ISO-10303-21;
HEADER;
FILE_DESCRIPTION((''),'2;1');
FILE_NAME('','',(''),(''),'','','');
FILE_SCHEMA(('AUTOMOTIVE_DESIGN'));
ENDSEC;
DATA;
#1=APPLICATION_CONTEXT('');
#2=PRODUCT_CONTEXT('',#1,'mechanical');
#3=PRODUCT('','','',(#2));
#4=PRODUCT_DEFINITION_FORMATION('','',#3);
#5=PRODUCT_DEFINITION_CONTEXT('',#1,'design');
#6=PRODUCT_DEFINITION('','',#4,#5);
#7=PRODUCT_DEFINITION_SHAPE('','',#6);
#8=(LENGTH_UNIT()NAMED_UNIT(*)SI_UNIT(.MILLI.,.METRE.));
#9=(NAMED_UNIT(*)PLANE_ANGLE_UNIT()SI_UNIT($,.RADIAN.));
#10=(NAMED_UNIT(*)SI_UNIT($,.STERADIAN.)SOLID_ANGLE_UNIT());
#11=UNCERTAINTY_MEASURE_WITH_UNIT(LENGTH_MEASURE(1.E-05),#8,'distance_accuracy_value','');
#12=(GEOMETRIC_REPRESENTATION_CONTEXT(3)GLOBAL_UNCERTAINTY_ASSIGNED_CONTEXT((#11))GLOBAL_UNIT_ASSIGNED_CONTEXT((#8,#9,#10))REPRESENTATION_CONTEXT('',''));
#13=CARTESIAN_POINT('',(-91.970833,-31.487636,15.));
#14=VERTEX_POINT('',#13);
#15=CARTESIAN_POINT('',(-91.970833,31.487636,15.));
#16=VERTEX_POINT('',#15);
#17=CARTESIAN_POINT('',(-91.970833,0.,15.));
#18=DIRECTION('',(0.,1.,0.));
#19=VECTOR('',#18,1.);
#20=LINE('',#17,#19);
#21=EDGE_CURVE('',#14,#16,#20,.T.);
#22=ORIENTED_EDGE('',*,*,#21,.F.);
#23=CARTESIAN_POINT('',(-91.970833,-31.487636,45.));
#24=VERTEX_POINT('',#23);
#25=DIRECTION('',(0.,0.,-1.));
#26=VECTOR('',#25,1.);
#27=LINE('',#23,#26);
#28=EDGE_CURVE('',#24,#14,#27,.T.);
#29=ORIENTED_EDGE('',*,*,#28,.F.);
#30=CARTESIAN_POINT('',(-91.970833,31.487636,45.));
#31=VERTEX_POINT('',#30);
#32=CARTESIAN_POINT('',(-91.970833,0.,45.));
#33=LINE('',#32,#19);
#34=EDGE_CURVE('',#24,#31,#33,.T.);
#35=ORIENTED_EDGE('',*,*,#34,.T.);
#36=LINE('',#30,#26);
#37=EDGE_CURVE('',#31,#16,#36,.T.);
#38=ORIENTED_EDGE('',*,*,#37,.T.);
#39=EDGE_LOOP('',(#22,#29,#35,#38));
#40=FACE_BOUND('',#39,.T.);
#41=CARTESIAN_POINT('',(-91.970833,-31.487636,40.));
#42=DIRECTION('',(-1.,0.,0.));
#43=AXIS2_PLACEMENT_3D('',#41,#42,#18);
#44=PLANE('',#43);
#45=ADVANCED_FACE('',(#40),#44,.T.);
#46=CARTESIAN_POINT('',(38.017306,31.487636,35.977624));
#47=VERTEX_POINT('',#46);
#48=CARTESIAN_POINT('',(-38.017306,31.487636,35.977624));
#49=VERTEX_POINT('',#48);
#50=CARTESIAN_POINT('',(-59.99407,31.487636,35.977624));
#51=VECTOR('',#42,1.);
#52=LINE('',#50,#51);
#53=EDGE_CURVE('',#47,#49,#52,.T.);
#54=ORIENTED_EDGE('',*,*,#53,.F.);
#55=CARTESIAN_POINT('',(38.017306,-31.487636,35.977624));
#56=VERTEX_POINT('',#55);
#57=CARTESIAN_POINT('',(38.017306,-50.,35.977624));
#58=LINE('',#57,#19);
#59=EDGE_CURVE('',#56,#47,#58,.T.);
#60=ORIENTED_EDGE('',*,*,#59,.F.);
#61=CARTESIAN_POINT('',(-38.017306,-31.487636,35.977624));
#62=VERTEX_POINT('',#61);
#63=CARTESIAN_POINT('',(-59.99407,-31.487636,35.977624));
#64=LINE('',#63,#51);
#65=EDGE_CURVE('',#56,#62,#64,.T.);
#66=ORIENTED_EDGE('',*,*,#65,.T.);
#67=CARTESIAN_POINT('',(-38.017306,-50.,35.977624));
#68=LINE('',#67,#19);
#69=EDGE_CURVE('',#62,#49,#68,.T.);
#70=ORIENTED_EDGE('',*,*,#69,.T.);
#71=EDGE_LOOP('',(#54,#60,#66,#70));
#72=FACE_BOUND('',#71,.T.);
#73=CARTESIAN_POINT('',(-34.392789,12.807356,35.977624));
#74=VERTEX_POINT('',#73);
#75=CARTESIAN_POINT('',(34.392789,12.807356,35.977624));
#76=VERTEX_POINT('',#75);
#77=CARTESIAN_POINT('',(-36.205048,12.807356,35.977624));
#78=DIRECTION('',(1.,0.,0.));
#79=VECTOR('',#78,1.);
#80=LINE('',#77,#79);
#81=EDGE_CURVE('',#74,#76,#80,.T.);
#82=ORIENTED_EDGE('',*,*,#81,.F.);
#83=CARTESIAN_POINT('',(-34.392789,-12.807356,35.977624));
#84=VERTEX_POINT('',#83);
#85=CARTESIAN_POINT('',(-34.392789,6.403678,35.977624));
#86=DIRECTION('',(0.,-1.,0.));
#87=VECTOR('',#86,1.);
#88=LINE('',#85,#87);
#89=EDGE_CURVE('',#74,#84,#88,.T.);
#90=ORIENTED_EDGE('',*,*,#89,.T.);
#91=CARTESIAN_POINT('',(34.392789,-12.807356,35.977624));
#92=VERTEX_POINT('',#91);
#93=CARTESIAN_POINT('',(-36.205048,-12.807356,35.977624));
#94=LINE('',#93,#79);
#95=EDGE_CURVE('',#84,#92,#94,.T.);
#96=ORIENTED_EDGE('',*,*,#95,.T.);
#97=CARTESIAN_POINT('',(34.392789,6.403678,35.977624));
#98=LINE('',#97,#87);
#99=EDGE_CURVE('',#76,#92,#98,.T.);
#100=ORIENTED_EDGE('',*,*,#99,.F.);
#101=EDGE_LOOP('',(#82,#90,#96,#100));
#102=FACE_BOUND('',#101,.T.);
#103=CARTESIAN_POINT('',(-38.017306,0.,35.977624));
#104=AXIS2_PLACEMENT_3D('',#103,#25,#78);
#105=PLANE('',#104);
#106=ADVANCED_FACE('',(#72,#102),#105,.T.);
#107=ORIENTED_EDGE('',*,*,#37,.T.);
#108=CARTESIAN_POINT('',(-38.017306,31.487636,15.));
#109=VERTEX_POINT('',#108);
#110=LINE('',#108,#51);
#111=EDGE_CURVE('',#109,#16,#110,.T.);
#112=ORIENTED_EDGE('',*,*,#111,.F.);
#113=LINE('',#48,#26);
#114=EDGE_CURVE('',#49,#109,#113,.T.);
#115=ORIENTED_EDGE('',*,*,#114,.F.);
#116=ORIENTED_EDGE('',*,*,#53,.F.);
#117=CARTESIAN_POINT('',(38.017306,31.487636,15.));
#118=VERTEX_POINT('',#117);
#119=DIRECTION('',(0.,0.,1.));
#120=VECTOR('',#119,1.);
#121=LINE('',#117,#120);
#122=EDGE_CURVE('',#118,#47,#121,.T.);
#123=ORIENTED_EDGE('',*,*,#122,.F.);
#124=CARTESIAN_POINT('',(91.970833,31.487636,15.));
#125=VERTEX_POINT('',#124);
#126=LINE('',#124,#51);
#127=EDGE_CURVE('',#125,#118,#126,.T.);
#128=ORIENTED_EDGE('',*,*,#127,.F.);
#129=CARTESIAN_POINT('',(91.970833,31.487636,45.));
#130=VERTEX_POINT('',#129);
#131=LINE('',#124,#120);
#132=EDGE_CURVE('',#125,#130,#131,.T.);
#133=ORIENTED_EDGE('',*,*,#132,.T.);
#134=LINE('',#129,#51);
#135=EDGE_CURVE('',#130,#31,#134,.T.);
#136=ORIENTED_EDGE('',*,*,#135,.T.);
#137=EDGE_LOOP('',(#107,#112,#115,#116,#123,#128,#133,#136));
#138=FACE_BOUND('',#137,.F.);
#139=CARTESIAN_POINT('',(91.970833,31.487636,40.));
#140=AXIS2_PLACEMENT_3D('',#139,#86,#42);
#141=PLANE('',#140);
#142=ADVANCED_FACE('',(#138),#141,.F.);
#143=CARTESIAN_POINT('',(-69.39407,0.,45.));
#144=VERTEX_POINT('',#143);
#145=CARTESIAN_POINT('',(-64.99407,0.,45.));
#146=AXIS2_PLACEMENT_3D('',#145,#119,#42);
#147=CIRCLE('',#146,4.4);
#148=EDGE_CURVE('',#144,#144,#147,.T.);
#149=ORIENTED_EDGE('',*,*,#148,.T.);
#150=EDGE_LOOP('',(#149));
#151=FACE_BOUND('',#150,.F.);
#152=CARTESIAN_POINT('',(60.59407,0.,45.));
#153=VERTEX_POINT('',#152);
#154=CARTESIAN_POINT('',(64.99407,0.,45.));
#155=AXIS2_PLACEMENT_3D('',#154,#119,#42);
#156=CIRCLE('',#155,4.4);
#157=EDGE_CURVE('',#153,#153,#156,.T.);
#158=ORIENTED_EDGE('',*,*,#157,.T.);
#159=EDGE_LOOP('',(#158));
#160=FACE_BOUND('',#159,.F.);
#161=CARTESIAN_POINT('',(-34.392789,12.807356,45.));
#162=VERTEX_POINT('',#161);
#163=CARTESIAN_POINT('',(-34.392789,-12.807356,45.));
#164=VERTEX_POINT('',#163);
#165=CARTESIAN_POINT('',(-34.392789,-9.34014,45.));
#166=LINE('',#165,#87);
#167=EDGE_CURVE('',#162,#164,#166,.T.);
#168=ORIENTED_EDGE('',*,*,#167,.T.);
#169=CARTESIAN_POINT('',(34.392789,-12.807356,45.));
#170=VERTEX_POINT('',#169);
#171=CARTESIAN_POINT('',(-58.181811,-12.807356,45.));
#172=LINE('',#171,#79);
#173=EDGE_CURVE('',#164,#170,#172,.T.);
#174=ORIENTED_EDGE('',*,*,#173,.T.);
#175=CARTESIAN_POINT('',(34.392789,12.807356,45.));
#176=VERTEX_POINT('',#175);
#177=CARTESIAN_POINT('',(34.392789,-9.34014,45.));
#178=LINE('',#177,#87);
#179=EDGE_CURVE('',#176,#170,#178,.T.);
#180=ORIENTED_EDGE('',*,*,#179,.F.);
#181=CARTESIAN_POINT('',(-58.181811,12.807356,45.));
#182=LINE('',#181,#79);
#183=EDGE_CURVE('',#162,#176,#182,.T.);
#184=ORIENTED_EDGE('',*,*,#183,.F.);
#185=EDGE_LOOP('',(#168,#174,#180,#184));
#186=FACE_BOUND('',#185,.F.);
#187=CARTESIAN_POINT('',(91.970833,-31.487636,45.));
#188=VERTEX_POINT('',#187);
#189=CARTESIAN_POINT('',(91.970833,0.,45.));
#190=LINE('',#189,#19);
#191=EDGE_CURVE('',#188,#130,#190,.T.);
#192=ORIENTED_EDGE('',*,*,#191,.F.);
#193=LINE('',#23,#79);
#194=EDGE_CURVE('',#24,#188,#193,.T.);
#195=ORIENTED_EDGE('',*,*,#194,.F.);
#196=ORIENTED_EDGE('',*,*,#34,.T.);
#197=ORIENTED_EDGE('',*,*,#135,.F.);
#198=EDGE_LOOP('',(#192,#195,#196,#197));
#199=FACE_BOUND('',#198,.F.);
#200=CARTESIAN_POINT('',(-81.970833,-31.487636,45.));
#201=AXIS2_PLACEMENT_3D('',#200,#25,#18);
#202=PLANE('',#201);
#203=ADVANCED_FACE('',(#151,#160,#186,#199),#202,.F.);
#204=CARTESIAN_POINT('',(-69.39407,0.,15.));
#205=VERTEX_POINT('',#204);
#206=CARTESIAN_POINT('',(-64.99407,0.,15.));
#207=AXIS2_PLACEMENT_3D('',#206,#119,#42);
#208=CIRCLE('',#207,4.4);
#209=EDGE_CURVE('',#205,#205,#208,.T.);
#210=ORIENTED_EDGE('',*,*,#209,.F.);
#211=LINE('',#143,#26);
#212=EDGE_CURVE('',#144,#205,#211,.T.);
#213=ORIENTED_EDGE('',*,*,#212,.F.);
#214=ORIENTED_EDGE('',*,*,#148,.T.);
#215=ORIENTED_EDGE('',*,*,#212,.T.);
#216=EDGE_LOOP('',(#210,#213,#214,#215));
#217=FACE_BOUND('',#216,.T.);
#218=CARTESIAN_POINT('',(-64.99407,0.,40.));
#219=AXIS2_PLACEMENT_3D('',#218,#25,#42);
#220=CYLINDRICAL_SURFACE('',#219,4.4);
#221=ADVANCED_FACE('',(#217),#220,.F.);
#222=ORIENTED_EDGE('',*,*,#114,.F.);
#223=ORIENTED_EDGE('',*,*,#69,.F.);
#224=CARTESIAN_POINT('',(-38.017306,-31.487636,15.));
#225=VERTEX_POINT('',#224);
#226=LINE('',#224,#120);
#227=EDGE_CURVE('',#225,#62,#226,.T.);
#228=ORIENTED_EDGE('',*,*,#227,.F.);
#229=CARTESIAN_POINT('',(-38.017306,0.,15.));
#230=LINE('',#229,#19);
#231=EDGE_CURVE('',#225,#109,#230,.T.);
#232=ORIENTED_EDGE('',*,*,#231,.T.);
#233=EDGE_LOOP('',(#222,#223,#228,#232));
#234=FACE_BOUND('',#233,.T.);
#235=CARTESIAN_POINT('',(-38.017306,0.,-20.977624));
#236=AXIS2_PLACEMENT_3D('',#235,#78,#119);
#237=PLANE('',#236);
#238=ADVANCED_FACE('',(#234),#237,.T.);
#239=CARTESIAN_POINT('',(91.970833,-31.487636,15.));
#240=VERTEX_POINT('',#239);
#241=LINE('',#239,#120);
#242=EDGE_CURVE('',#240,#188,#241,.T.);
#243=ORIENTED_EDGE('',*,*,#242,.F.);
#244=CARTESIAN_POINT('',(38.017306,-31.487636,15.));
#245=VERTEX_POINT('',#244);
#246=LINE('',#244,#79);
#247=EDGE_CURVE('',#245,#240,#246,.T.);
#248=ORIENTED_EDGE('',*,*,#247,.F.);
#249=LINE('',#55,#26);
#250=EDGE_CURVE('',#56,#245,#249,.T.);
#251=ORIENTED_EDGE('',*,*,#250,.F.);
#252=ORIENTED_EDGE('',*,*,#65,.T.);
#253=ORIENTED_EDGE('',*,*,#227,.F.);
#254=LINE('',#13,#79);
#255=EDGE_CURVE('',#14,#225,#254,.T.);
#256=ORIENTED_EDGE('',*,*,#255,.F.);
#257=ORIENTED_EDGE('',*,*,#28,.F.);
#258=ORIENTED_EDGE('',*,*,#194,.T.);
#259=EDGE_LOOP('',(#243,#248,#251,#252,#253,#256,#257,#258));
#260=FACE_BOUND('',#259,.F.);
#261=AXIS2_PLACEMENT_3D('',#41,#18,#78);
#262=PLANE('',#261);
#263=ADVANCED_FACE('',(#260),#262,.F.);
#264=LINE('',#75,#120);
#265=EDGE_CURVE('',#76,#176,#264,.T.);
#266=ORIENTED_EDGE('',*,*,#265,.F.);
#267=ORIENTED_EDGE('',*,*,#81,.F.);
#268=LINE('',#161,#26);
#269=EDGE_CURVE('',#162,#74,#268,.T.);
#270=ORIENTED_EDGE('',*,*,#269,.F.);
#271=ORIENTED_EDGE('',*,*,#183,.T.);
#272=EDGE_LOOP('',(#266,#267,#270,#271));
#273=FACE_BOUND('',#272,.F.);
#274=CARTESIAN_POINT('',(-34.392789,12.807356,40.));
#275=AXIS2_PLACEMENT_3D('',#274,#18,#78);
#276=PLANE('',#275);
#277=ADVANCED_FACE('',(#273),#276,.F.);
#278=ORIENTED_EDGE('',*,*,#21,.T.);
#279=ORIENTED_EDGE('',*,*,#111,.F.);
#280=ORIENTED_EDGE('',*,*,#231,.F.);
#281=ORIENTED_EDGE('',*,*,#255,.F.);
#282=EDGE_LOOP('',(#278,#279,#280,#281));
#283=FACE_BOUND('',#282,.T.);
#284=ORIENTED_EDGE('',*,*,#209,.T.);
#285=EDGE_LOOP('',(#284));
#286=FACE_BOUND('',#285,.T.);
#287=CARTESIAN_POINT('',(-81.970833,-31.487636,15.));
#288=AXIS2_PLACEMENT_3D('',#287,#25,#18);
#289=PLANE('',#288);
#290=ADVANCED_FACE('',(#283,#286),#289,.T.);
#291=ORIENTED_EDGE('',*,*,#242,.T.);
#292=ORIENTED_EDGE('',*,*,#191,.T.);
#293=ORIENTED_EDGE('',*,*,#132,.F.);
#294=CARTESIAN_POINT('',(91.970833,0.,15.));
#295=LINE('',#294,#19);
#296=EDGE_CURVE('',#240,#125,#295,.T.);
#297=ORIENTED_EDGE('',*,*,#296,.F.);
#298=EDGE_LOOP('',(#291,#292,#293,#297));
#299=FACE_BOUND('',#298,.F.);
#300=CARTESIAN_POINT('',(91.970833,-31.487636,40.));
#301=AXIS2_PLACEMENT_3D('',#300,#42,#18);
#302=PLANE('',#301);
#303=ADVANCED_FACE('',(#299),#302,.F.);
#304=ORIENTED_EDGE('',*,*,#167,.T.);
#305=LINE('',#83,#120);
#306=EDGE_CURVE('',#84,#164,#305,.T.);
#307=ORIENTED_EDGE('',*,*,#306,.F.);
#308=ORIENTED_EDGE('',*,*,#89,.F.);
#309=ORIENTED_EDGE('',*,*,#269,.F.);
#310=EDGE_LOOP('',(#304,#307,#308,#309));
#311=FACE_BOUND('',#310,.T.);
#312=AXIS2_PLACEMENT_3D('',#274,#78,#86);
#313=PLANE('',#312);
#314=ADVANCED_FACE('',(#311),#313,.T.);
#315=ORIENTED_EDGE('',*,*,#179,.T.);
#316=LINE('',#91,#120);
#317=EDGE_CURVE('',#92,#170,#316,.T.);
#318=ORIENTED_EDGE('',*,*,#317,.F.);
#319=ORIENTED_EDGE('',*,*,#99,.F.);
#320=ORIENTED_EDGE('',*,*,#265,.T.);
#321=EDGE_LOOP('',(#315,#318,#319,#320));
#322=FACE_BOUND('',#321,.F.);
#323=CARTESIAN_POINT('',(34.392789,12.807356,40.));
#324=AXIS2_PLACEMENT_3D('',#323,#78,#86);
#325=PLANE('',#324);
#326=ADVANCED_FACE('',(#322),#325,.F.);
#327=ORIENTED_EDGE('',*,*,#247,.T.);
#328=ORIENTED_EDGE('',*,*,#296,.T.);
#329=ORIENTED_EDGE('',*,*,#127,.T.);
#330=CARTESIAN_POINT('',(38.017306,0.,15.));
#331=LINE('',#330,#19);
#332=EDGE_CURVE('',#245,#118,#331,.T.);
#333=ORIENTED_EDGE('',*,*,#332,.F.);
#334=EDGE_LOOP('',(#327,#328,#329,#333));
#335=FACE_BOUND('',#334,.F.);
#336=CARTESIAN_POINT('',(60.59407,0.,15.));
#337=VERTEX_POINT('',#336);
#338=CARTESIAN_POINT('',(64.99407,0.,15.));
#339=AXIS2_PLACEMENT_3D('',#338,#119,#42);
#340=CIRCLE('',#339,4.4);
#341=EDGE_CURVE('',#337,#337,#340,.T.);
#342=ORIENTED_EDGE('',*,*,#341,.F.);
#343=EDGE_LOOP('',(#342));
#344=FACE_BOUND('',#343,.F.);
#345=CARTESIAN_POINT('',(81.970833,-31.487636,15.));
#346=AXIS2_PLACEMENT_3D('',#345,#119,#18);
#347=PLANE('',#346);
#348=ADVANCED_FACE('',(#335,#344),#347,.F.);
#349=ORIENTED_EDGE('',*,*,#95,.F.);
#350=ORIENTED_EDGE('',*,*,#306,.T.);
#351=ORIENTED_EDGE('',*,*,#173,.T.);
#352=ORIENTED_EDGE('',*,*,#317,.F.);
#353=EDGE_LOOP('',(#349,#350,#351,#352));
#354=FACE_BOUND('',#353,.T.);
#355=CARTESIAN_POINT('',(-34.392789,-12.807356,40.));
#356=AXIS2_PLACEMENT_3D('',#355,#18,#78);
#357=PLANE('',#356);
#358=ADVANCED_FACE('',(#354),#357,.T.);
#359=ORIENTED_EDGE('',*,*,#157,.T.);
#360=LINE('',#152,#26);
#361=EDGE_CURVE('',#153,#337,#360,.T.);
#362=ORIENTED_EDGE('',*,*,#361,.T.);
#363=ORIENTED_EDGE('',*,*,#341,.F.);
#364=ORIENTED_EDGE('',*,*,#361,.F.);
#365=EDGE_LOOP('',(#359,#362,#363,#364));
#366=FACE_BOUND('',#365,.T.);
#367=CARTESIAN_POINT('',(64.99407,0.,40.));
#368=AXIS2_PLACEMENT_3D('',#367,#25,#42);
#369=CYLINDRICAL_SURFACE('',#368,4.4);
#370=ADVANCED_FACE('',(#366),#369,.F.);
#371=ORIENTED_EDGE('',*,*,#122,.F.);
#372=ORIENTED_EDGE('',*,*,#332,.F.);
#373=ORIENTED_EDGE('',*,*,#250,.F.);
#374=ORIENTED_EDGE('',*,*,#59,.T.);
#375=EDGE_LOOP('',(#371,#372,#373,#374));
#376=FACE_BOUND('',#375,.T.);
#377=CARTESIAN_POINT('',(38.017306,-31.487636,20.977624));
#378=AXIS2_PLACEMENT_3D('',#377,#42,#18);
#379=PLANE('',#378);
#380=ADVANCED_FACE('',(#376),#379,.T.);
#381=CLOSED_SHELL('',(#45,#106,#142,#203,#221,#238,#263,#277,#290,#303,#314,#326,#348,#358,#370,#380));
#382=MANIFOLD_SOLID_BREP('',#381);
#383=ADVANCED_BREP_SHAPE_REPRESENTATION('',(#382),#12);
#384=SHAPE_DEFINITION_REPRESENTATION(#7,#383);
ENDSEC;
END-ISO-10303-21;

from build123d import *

# Parameters (mm, degrees)
F0_W      = 163.9416664839
F0_H      = 62.9752725363
F1_DEPTH  = 10
F2_DEPTH  = 20
F3_W      = 76.0346129537
F3_H      = 41.9552475214
F4_DEPTH  = 50
F5_DEPTH  = 10
F6_DEPTH  = 10
F7_DEPTH  = 10
F9_D      = 8.8
F11_D     = 8.8
F12_W     = 68.7855780125
F12_H     = 25.6147123873
F13_DEPTH = 25
F14_DEPTH = 10
F15_DEPTH = 10
F16_DEPTH = 5
F17_DEPTH = 5
F18_DEPTH = 15
F19_DEPTH = 5


with BuildPart() as f1:
    # F0 (on Top) → F1 (new body)
    with BuildSketch(Plane.XY):
        Rectangle(F0_W, F0_H)
    extrude(amount=F1_DEPTH)

    # F2 (add): a face of the model
    f2_faces = [f1.faces().sort_by_distance(p)[0] for p in [
        (0, 0, 10),
    ]]
    extrude(f2_faces, amount=F2_DEPTH)

    # F3 (on Front) → F4 (cut, symmetric)
    with BuildSketch(Plane.XZ):
        Rectangle(F3_W, F3_H)
    extrude(amount=F4_DEPTH, both=True, mode=Mode.SUBTRACT)

    # F5 (add): a face of the model
    f5_faces = [f1.faces().sort_by_distance(p)[0] for p in [
        (0, 0, 30),
    ]]
    extrude(f5_faces, amount=F5_DEPTH)

    # F6 (add): a face of the model
    f6_faces = [f1.faces().sort_by_distance(p)[0] for p in [
        (81.9708332419, 0, 20),
    ]]
    extrude(f6_faces, amount=F6_DEPTH)

    # F7 (add): a face of the model
    f7_faces = [f1.faces().sort_by_distance(p)[0] for p in [
        (-81.9708332419, 0, 20),
    ]]
    extrude(f7_faces, amount=F7_DEPTH)

    # F9 (through all)
    with Locations(Plane(origin=(0, 0, 0), x_dir=(1, 0, 0), z_dir=(0, 0, -1))):
        with Locations((-64.9940698594, 0)):
            Hole(F9_D / 2)

    # F11 (through all)
    with Locations(Plane(origin=(0, 0, 0), x_dir=(1, 0, 0), z_dir=(0, 0, -1))):
        with Locations((64.9940698594, 0)):
            Hole(F11_D / 2)

    # F12 (on face) → F13 (cut, symmetric)
    with BuildSketch(Plane(origin=(0, 0, 20.9776237607), x_dir=(1, 0, 0), z_dir=(0, 0, -1))):
        Rectangle(F12_W, F12_H)
    extrude(amount=F13_DEPTH, both=True, mode=Mode.SUBTRACT)

    # F14 (cut): a face of the model
    f14_faces = [f1.faces().sort_by_distance(p)[0] for p in [
        (-38.8465753115, 0, 0),
    ]]
    extrude(f14_faces, amount=-F14_DEPTH, mode=Mode.SUBTRACT)

    # F15 (cut): a face of the model
    f15_faces = [f1.faces().sort_by_distance(p)[0] for p in [
        (64.9940698594, -30.6583674335, 0),
    ]]
    extrude(f15_faces, amount=-F15_DEPTH, mode=Mode.SUBTRACT)

    # F16 (cut): a face of the model
    f16_faces = [f1.faces().sort_by_distance(p)[0] for p in [
        (64.9940698594, -30.6583674335, 10),
    ]]
    extrude(f16_faces, amount=-F16_DEPTH, mode=Mode.SUBTRACT)

    # F17 (cut): a face of the model
    f17_faces = [f1.faces().sort_by_distance(p)[0] for p in [
        (-38.8465753115, 0, 10),
    ]]
    extrude(f17_faces, amount=-F17_DEPTH, mode=Mode.SUBTRACT)

    # F18 (cut): a face of the model
    f18_faces = [f1.faces().sort_by_distance(p)[0] for p in [
        (37.0300300557, 0, 20.9776237607),
    ]]
    extrude(f18_faces, amount=-F18_DEPTH, mode=Mode.SUBTRACT)

    # F19 (add): a face of the model
    f19_faces = [f1.faces().sort_by_distance(p)[0] for p in [
        (0, 29.5434032158, 40),
    ]]
    extrude(f19_faces, amount=F19_DEPTH)


solid = f1.part
